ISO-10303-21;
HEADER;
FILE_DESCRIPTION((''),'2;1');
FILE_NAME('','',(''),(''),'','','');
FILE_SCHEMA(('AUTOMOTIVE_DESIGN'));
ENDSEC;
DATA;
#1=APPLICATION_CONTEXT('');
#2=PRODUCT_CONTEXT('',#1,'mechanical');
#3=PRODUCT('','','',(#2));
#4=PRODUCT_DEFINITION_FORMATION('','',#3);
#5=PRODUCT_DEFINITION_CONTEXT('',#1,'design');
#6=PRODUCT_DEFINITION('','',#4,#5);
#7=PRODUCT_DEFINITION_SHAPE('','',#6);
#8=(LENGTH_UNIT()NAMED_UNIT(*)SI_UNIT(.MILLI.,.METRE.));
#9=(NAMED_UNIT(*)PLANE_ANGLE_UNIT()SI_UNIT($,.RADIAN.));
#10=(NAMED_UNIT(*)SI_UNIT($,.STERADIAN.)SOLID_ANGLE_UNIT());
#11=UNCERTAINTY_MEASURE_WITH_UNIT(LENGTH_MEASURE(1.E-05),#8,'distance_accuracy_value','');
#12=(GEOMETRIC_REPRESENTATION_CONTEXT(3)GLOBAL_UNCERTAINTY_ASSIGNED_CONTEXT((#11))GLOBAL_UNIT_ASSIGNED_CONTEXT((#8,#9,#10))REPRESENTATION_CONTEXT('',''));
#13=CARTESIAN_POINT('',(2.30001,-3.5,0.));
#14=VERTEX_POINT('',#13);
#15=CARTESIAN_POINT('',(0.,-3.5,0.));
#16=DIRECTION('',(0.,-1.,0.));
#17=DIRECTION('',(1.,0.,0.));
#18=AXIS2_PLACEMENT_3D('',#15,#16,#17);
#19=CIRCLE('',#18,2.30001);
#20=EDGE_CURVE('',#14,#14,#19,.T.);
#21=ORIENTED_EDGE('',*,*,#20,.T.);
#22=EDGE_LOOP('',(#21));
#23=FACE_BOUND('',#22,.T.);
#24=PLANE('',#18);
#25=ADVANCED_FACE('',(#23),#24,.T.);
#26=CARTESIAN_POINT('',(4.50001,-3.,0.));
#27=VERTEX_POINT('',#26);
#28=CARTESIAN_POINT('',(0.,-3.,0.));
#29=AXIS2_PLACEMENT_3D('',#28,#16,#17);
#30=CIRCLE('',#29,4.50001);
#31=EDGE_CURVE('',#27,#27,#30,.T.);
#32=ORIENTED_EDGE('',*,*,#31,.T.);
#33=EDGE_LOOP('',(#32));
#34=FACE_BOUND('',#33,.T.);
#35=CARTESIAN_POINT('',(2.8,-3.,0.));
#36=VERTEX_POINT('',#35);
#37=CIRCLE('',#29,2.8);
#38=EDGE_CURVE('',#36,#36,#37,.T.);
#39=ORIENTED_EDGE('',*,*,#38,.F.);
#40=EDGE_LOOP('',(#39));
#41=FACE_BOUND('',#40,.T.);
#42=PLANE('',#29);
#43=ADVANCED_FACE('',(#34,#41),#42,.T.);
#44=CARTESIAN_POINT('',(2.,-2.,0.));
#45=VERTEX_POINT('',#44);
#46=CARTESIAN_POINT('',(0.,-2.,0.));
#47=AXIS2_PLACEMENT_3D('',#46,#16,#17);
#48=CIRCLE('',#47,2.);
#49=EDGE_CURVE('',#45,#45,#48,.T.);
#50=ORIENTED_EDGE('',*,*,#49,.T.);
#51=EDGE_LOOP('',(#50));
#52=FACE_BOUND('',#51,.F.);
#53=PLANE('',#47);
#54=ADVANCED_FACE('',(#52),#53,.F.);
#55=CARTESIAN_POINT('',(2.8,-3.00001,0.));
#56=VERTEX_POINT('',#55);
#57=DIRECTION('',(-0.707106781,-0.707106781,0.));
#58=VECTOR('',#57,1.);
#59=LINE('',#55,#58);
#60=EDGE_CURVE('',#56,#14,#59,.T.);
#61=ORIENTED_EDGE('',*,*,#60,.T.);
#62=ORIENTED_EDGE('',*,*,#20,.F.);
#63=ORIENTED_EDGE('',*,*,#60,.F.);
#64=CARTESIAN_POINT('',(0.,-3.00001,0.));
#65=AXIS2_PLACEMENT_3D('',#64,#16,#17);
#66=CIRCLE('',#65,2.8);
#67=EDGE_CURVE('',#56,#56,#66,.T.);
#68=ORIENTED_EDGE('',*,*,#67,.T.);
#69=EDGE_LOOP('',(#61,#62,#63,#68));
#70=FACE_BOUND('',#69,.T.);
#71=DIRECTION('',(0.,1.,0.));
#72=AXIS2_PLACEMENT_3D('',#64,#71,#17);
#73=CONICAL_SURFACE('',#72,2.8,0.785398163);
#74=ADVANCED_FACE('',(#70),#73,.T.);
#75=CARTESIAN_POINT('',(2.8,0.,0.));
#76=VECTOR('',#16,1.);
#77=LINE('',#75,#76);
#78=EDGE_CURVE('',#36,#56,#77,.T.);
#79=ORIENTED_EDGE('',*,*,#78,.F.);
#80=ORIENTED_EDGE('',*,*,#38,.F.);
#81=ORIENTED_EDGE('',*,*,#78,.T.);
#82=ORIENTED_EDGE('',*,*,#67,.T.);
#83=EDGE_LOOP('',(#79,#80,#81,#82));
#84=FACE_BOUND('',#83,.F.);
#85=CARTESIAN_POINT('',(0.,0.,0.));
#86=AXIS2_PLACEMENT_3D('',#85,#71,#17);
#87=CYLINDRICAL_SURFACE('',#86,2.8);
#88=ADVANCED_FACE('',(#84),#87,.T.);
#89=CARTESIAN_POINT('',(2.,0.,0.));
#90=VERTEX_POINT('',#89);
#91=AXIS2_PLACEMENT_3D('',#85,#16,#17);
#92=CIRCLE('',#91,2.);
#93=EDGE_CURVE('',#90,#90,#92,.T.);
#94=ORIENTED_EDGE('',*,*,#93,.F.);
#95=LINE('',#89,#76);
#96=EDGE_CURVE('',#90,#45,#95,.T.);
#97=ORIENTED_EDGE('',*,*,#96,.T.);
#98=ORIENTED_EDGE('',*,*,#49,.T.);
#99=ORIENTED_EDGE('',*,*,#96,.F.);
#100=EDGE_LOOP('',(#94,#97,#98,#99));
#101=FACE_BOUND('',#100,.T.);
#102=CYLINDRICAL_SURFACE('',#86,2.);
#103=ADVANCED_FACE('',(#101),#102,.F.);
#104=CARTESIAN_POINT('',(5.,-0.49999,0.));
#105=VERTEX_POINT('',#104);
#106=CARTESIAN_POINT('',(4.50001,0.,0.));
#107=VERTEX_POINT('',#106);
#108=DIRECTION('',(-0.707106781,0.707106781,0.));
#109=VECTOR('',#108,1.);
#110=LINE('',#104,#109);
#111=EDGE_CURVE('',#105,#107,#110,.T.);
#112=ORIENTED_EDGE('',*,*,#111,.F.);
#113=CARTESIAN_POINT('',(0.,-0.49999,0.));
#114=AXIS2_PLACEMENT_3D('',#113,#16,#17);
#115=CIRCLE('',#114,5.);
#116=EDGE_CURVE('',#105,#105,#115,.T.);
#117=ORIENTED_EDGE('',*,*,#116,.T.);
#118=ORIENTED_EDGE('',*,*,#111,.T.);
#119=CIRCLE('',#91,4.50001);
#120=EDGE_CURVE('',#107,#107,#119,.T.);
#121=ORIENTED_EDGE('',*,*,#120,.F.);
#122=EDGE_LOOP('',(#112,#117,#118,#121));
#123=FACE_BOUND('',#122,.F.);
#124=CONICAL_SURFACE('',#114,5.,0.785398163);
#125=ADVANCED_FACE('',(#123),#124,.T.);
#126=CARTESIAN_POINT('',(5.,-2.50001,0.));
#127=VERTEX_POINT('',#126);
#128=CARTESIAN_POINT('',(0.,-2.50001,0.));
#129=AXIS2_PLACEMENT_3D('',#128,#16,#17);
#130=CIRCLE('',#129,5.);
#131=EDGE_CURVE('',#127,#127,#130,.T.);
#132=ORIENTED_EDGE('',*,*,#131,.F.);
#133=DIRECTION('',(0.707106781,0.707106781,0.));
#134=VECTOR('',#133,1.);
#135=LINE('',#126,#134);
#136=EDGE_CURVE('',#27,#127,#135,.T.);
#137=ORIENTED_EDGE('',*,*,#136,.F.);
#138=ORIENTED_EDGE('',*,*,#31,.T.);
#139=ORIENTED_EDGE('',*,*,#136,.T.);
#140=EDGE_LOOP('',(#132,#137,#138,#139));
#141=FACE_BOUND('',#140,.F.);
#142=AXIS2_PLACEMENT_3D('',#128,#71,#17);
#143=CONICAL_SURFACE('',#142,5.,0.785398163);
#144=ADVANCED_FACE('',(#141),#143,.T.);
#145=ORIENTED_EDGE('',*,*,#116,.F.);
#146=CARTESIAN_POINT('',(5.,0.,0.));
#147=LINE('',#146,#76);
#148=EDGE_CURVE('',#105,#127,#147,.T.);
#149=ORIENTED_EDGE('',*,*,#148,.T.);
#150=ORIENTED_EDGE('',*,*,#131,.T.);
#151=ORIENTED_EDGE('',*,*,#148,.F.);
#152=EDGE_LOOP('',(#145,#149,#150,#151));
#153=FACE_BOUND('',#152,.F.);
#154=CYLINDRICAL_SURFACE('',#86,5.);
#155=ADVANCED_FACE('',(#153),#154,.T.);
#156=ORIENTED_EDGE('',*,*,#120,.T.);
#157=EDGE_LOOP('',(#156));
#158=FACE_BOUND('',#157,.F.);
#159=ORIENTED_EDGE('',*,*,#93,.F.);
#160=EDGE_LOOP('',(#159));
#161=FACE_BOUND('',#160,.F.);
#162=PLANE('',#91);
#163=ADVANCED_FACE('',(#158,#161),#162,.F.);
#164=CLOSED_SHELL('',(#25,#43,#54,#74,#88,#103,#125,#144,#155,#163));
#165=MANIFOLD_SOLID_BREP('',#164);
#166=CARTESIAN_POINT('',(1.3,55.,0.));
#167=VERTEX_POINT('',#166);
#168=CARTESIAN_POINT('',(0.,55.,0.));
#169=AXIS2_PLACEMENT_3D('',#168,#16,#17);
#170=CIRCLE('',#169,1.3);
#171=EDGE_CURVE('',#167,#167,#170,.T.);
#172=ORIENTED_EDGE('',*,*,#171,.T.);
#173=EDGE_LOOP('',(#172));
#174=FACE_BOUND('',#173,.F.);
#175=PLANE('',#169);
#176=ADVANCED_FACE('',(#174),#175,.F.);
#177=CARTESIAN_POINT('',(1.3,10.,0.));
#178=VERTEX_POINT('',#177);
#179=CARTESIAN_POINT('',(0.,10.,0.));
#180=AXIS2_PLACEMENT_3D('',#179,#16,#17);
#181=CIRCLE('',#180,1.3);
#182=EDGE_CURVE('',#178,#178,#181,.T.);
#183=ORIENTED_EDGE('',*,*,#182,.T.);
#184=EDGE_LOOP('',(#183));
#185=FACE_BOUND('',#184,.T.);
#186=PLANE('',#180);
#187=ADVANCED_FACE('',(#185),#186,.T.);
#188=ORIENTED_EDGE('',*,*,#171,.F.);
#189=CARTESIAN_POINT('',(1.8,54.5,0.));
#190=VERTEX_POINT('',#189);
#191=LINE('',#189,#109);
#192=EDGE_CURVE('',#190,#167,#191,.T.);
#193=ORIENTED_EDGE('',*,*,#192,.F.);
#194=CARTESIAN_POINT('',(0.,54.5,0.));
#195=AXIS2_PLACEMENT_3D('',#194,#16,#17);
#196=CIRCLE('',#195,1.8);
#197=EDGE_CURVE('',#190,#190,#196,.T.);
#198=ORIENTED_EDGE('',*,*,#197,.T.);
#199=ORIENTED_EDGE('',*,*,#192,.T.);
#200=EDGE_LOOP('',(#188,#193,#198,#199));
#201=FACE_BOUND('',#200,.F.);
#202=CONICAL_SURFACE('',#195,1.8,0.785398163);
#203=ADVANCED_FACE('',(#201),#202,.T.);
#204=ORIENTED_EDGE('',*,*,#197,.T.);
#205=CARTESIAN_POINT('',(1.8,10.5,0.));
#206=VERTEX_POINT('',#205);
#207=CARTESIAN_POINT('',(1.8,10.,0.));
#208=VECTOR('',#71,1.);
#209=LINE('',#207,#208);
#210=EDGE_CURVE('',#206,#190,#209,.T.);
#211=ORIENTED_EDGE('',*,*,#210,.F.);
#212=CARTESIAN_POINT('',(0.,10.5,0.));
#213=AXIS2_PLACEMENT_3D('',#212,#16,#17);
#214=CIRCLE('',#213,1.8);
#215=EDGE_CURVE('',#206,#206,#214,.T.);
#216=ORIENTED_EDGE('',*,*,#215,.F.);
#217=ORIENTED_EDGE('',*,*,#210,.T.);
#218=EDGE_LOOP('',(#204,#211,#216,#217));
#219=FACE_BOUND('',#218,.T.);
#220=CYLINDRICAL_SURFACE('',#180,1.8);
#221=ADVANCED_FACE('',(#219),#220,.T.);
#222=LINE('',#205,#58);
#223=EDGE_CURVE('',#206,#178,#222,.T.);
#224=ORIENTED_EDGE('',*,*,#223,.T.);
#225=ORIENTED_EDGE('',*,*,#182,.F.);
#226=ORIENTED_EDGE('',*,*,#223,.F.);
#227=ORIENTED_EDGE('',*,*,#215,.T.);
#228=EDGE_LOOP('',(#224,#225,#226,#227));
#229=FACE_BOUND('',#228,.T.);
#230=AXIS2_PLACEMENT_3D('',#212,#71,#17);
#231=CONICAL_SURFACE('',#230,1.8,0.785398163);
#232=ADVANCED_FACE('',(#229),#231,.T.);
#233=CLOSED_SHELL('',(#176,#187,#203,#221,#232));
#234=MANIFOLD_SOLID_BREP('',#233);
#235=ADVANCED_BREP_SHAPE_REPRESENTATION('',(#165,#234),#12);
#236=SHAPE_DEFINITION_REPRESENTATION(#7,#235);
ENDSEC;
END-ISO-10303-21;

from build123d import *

# Parameters (mm, degrees)
F0_R     = 5
F0_R_2   = 2.8
F1_DEPTH = 3
F0_R_3   = 2
F0_R_4   = 1.8
F2_DEPTH = 3.5
F3_DEPTH = 2
F4_SIZE  = 0.49999
F5_START = -10
F5_DEPTH = 45
F6_SIZE  = 0.5


# Not quite as in the source:
# - a fillet or chamfer is up to 0.001 mm smaller than in the source, because OpenCascade refuses the exact size


with BuildPart() as f1:
    # F0 (on Front) → F1 (new body)
    with BuildSketch(Plane.XZ):
        Circle(F0_R)
        Circle(F0_R_2, mode=Mode.SUBTRACT)
    extrude(amount=F1_DEPTH)

    # F0 (on Front) → F2 (join)
    with BuildSketch(Plane.XZ):
        Circle(F0_R_2)
        Circle(F0_R_3, mode=Mode.SUBTRACT)
        Circle(F0_R_3)
        Circle(F0_R_4, mode=Mode.SUBTRACT)
        Circle(F0_R_4)
    extrude(amount=F2_DEPTH)

    # F0 (on Front) → F3 (cut)
    with BuildSketch(Plane.XZ):
        Circle(F0_R_3)
        Circle(F0_R_4, mode=Mode.SUBTRACT)
        Circle(F0_R_4)
    extrude(amount=F3_DEPTH, mode=Mode.SUBTRACT)

    # F4 (size 0.5 in the source; OpenCascade refuses exactly that, so slightly less here)
    f4_edges = [f1.edges().sort_by_distance(p)[0] for p in [
        (-2.8, -3.5, 0),
        (-5, -3, 0),
        (-5, 0, 0),
    ]]
    chamfer(f4_edges, length=F4_SIZE)


with BuildPart() as f5:
    # F0 (on Front) → F5 (new body)
    with BuildSketch(Plane.XZ.offset(F5_START)):
        Circle(F0_R_4)
    extrude(amount=-F5_DEPTH)

    # F6
    f6_edges = [f5.edges().sort_by_distance(p)[0] for p in [
        (-1.8, 55, 0),
        (-1.8, 10, 0),
    ]]
    chamfer(f6_edges, length=F6_SIZE)


solid = Compound([f1.part, f5.part])
